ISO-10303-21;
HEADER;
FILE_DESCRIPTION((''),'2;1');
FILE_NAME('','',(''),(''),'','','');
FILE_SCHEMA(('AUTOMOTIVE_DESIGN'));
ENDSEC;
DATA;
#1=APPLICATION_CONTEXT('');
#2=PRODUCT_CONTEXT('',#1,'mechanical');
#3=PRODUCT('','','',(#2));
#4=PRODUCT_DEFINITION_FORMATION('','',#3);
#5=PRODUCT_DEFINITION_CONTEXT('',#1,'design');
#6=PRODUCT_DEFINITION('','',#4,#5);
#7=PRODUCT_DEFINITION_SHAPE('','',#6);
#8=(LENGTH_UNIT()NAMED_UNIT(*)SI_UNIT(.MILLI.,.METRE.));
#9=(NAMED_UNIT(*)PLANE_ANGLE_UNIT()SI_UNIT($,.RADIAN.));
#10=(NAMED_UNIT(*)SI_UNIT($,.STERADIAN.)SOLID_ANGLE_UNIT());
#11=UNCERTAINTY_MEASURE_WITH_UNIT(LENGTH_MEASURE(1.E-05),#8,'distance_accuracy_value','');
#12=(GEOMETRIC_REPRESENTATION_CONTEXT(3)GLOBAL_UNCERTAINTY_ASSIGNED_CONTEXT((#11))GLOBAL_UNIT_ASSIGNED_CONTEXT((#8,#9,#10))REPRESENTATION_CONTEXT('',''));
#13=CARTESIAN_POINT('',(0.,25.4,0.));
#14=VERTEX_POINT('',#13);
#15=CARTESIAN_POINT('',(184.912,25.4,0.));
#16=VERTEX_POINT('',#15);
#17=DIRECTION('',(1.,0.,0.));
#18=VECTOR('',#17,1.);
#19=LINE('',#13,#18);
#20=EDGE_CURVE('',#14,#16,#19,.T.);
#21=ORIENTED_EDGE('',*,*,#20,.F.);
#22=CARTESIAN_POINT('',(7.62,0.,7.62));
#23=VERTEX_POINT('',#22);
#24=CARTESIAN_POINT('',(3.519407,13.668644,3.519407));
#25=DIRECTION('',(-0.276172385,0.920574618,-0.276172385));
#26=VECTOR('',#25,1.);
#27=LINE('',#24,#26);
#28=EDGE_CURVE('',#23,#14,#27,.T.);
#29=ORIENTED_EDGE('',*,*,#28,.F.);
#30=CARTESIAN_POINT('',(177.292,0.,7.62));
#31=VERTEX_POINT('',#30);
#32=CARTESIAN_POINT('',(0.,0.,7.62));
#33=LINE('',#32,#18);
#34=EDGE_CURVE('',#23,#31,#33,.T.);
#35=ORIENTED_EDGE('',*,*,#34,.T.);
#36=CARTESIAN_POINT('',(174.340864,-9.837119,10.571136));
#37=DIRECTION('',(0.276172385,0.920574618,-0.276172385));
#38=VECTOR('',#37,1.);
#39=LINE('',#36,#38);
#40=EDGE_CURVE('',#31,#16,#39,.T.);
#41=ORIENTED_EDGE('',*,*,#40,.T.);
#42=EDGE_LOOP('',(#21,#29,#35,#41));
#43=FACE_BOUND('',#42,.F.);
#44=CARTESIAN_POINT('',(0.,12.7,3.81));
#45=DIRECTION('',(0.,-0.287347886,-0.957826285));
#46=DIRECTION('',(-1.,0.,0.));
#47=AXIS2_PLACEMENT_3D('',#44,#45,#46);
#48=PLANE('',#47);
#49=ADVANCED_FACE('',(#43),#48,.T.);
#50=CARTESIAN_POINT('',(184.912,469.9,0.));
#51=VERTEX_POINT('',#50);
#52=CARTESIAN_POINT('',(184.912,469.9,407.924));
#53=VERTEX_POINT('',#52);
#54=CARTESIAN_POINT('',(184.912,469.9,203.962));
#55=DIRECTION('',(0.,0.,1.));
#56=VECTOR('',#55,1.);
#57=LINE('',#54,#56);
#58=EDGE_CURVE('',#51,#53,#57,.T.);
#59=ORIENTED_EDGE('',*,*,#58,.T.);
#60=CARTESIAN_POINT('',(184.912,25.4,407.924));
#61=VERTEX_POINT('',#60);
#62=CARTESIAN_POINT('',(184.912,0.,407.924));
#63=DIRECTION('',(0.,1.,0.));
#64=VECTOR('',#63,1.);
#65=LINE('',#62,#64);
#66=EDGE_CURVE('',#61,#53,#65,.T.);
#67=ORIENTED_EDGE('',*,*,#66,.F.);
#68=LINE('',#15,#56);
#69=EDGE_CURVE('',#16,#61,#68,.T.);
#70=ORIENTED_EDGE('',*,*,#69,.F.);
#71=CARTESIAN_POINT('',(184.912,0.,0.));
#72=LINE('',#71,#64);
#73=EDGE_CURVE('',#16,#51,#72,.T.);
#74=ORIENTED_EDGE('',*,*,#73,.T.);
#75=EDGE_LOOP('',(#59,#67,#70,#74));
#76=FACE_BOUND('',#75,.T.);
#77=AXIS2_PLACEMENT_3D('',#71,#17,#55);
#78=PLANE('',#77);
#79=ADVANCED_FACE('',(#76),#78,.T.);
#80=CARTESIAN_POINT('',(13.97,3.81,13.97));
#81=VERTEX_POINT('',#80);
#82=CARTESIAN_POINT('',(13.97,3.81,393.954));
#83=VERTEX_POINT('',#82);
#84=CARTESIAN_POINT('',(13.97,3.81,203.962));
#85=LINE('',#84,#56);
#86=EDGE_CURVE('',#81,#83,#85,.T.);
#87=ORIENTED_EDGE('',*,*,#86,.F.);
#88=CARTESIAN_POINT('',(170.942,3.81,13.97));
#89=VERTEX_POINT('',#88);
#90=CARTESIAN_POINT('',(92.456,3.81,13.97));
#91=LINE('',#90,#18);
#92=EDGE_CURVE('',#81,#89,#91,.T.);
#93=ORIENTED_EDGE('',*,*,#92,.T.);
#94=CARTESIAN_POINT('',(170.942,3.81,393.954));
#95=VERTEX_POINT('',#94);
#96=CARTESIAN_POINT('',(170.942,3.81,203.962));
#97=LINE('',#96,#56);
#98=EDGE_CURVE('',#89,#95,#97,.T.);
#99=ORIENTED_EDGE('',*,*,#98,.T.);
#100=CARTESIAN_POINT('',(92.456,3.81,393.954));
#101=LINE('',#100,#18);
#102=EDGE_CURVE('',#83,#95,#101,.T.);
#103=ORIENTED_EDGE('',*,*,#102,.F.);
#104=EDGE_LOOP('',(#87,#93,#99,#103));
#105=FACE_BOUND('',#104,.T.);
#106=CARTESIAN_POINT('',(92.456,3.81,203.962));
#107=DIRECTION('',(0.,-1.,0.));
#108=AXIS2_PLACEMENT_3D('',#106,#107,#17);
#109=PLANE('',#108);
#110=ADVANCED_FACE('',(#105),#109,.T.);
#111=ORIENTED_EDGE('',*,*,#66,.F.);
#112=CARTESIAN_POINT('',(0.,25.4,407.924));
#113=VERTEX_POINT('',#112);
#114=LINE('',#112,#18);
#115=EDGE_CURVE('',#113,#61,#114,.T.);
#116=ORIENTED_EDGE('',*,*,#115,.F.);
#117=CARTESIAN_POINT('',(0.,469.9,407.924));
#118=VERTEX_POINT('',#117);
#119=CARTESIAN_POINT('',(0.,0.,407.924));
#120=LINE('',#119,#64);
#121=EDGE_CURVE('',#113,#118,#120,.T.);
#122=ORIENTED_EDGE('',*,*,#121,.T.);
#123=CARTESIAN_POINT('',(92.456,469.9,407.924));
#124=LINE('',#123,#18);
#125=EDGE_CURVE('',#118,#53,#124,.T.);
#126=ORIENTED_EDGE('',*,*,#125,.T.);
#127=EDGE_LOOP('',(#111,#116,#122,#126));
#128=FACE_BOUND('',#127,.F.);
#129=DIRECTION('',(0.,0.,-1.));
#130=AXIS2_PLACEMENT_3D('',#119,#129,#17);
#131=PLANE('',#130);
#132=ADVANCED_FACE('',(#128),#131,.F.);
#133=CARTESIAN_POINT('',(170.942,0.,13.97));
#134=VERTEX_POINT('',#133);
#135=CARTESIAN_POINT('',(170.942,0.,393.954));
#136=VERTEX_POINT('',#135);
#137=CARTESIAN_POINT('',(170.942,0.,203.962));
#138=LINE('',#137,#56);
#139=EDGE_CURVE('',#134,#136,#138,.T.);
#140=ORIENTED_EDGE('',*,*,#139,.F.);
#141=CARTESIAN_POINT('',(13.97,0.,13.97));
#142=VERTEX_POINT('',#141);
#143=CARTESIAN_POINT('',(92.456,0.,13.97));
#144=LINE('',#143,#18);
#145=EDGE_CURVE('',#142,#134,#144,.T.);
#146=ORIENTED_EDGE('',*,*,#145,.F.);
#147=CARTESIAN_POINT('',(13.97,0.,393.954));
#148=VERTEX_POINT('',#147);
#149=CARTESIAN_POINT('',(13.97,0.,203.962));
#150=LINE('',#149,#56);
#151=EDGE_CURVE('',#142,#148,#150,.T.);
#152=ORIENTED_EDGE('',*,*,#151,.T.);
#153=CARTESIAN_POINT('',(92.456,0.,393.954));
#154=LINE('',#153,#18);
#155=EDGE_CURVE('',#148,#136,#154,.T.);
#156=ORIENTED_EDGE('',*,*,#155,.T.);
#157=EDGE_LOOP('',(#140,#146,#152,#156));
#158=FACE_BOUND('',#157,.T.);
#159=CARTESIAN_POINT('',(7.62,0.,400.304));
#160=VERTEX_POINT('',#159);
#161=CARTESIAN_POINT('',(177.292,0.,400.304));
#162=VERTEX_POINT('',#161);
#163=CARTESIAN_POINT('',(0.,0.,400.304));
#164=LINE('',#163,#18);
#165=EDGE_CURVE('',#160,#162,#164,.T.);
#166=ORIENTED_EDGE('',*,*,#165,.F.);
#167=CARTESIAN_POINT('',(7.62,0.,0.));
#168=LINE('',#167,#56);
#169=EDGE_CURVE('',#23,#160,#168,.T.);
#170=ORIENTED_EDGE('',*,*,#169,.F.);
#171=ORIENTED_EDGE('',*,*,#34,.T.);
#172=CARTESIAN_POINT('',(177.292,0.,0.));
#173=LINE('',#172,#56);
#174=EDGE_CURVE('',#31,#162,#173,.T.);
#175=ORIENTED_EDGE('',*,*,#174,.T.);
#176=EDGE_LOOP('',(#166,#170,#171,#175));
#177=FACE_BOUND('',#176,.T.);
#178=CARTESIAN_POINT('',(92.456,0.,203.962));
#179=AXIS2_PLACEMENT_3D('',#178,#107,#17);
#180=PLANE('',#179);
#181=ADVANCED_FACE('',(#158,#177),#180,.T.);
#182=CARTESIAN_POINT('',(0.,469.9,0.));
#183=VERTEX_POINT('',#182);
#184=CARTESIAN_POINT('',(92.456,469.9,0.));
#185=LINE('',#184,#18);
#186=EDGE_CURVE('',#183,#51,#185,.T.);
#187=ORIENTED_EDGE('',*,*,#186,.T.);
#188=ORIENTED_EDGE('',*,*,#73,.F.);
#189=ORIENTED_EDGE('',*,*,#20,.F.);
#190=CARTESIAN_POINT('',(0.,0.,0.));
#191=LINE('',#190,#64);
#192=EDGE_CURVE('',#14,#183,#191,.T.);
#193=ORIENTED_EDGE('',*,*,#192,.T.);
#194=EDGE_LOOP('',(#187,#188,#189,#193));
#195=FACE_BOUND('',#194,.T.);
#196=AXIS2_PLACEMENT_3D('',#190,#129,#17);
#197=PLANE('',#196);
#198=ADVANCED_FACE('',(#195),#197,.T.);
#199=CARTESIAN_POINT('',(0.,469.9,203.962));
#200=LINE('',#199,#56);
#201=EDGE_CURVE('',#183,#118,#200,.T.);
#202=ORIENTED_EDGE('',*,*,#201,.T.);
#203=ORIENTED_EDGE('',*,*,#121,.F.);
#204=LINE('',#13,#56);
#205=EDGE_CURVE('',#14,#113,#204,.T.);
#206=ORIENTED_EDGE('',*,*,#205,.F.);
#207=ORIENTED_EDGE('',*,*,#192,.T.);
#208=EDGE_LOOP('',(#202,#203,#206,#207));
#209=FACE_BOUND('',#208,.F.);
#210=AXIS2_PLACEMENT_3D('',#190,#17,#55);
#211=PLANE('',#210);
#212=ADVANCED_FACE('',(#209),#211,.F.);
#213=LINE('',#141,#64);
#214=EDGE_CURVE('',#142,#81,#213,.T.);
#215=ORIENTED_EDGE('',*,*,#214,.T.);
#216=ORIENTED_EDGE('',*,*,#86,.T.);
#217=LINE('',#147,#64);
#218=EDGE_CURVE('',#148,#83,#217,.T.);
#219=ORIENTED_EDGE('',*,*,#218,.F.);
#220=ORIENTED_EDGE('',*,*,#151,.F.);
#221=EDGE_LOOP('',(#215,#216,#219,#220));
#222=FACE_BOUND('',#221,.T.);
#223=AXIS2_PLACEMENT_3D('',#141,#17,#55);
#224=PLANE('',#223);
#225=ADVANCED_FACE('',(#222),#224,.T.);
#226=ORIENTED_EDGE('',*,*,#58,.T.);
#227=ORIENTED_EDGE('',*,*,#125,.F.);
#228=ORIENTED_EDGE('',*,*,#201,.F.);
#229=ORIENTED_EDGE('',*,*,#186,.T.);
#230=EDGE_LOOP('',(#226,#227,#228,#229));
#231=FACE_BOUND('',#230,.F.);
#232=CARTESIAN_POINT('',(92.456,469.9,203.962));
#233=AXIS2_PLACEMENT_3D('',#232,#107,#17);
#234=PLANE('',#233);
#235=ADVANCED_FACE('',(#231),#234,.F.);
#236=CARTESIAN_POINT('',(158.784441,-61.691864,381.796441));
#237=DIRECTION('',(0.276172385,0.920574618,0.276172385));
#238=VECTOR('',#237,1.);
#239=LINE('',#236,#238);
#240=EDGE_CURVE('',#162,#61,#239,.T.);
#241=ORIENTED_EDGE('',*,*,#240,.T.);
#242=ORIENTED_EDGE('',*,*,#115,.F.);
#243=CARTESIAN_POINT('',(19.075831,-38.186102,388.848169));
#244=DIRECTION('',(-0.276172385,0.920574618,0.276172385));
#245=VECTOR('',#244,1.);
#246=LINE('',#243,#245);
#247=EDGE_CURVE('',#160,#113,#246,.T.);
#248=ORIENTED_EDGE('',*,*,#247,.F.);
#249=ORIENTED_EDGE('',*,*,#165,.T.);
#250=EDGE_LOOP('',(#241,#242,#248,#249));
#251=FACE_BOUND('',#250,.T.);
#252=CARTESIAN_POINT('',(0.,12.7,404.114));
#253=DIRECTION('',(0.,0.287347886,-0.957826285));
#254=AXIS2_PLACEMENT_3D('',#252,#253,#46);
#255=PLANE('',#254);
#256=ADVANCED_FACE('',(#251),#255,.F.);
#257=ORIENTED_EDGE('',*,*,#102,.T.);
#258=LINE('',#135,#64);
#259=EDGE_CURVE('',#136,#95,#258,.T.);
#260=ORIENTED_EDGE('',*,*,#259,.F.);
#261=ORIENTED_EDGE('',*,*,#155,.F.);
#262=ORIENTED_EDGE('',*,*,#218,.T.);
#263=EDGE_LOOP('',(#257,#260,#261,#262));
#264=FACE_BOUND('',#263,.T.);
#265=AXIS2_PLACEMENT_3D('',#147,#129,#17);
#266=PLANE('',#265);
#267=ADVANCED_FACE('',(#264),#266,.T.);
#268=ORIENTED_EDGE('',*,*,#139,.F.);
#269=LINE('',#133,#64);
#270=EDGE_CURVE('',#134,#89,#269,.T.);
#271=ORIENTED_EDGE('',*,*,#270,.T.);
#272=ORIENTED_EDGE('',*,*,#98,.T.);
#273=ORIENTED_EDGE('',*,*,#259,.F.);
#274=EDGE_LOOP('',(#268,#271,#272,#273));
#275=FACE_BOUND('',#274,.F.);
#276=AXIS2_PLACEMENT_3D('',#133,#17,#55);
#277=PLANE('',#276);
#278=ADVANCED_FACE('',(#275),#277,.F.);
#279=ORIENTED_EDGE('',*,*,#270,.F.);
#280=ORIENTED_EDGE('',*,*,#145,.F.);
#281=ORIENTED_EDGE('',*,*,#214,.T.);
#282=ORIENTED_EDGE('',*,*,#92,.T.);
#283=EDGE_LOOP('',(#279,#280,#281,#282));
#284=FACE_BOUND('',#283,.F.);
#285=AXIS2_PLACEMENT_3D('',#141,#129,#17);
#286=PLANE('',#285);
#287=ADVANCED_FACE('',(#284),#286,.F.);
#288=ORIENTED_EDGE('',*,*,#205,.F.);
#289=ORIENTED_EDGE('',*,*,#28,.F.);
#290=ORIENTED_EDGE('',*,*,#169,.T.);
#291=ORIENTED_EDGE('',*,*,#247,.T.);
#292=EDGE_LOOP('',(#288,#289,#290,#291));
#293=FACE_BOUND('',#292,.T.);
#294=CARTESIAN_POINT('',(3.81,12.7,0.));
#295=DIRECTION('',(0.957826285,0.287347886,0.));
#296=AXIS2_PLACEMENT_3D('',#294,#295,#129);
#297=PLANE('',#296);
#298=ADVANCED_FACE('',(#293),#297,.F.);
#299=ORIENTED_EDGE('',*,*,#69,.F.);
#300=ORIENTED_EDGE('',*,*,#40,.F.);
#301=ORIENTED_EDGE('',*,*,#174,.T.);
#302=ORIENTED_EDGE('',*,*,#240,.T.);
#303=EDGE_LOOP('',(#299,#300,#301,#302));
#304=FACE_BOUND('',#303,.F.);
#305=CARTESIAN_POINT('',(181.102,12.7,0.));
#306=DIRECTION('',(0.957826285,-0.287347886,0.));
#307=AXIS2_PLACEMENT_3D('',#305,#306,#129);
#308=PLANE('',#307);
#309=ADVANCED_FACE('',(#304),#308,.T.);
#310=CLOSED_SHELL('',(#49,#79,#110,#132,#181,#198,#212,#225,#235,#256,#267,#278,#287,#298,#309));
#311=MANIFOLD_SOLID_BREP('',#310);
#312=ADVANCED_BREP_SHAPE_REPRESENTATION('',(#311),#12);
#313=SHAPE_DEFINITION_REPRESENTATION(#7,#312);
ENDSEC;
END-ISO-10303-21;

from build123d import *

# Parameters (mm, degrees)
F0_W     = 184.912
F0_H     = 407.924
F1_DEPTH = 469.9
F2_SIZE2 = 25.4
F2_SIZE  = 7.62
F3_W     = 156.972
F3_H     = 379.984
F4_DEPTH = 3.81


with BuildPart() as f1:
    # F0 (on Front) → F1 (new body)
    with BuildSketch(Plane.XZ):
        with Locations((92.456, 203.962)):
            Rectangle(F0_W, F0_H)
    extrude(amount=-F1_DEPTH)

    # F2
    f2_edges = [f1.edges().sort_by_distance(p)[0] for p in [
        (0, 0, 203.962),
        (92.456, 0, 407.924),
        (184.912, 0, 203.962),
        (92.456, 0, 0),
    ]]
    f2_side = f1.faces().sort_by_distance((92.456, 0, 203.962))[0]
    chamfer(f2_edges, length=F2_SIZE, length2=F2_SIZE2, reference=f2_side)

    # F3 (on face) → F4 (cut)
    with BuildSketch(Plane.XZ):
        with Locations((92.456, 203.962)):
            Rectangle(F3_W, F3_H)
    extrude(amount=-F4_DEPTH, mode=Mode.SUBTRACT)


solid = f1.part
